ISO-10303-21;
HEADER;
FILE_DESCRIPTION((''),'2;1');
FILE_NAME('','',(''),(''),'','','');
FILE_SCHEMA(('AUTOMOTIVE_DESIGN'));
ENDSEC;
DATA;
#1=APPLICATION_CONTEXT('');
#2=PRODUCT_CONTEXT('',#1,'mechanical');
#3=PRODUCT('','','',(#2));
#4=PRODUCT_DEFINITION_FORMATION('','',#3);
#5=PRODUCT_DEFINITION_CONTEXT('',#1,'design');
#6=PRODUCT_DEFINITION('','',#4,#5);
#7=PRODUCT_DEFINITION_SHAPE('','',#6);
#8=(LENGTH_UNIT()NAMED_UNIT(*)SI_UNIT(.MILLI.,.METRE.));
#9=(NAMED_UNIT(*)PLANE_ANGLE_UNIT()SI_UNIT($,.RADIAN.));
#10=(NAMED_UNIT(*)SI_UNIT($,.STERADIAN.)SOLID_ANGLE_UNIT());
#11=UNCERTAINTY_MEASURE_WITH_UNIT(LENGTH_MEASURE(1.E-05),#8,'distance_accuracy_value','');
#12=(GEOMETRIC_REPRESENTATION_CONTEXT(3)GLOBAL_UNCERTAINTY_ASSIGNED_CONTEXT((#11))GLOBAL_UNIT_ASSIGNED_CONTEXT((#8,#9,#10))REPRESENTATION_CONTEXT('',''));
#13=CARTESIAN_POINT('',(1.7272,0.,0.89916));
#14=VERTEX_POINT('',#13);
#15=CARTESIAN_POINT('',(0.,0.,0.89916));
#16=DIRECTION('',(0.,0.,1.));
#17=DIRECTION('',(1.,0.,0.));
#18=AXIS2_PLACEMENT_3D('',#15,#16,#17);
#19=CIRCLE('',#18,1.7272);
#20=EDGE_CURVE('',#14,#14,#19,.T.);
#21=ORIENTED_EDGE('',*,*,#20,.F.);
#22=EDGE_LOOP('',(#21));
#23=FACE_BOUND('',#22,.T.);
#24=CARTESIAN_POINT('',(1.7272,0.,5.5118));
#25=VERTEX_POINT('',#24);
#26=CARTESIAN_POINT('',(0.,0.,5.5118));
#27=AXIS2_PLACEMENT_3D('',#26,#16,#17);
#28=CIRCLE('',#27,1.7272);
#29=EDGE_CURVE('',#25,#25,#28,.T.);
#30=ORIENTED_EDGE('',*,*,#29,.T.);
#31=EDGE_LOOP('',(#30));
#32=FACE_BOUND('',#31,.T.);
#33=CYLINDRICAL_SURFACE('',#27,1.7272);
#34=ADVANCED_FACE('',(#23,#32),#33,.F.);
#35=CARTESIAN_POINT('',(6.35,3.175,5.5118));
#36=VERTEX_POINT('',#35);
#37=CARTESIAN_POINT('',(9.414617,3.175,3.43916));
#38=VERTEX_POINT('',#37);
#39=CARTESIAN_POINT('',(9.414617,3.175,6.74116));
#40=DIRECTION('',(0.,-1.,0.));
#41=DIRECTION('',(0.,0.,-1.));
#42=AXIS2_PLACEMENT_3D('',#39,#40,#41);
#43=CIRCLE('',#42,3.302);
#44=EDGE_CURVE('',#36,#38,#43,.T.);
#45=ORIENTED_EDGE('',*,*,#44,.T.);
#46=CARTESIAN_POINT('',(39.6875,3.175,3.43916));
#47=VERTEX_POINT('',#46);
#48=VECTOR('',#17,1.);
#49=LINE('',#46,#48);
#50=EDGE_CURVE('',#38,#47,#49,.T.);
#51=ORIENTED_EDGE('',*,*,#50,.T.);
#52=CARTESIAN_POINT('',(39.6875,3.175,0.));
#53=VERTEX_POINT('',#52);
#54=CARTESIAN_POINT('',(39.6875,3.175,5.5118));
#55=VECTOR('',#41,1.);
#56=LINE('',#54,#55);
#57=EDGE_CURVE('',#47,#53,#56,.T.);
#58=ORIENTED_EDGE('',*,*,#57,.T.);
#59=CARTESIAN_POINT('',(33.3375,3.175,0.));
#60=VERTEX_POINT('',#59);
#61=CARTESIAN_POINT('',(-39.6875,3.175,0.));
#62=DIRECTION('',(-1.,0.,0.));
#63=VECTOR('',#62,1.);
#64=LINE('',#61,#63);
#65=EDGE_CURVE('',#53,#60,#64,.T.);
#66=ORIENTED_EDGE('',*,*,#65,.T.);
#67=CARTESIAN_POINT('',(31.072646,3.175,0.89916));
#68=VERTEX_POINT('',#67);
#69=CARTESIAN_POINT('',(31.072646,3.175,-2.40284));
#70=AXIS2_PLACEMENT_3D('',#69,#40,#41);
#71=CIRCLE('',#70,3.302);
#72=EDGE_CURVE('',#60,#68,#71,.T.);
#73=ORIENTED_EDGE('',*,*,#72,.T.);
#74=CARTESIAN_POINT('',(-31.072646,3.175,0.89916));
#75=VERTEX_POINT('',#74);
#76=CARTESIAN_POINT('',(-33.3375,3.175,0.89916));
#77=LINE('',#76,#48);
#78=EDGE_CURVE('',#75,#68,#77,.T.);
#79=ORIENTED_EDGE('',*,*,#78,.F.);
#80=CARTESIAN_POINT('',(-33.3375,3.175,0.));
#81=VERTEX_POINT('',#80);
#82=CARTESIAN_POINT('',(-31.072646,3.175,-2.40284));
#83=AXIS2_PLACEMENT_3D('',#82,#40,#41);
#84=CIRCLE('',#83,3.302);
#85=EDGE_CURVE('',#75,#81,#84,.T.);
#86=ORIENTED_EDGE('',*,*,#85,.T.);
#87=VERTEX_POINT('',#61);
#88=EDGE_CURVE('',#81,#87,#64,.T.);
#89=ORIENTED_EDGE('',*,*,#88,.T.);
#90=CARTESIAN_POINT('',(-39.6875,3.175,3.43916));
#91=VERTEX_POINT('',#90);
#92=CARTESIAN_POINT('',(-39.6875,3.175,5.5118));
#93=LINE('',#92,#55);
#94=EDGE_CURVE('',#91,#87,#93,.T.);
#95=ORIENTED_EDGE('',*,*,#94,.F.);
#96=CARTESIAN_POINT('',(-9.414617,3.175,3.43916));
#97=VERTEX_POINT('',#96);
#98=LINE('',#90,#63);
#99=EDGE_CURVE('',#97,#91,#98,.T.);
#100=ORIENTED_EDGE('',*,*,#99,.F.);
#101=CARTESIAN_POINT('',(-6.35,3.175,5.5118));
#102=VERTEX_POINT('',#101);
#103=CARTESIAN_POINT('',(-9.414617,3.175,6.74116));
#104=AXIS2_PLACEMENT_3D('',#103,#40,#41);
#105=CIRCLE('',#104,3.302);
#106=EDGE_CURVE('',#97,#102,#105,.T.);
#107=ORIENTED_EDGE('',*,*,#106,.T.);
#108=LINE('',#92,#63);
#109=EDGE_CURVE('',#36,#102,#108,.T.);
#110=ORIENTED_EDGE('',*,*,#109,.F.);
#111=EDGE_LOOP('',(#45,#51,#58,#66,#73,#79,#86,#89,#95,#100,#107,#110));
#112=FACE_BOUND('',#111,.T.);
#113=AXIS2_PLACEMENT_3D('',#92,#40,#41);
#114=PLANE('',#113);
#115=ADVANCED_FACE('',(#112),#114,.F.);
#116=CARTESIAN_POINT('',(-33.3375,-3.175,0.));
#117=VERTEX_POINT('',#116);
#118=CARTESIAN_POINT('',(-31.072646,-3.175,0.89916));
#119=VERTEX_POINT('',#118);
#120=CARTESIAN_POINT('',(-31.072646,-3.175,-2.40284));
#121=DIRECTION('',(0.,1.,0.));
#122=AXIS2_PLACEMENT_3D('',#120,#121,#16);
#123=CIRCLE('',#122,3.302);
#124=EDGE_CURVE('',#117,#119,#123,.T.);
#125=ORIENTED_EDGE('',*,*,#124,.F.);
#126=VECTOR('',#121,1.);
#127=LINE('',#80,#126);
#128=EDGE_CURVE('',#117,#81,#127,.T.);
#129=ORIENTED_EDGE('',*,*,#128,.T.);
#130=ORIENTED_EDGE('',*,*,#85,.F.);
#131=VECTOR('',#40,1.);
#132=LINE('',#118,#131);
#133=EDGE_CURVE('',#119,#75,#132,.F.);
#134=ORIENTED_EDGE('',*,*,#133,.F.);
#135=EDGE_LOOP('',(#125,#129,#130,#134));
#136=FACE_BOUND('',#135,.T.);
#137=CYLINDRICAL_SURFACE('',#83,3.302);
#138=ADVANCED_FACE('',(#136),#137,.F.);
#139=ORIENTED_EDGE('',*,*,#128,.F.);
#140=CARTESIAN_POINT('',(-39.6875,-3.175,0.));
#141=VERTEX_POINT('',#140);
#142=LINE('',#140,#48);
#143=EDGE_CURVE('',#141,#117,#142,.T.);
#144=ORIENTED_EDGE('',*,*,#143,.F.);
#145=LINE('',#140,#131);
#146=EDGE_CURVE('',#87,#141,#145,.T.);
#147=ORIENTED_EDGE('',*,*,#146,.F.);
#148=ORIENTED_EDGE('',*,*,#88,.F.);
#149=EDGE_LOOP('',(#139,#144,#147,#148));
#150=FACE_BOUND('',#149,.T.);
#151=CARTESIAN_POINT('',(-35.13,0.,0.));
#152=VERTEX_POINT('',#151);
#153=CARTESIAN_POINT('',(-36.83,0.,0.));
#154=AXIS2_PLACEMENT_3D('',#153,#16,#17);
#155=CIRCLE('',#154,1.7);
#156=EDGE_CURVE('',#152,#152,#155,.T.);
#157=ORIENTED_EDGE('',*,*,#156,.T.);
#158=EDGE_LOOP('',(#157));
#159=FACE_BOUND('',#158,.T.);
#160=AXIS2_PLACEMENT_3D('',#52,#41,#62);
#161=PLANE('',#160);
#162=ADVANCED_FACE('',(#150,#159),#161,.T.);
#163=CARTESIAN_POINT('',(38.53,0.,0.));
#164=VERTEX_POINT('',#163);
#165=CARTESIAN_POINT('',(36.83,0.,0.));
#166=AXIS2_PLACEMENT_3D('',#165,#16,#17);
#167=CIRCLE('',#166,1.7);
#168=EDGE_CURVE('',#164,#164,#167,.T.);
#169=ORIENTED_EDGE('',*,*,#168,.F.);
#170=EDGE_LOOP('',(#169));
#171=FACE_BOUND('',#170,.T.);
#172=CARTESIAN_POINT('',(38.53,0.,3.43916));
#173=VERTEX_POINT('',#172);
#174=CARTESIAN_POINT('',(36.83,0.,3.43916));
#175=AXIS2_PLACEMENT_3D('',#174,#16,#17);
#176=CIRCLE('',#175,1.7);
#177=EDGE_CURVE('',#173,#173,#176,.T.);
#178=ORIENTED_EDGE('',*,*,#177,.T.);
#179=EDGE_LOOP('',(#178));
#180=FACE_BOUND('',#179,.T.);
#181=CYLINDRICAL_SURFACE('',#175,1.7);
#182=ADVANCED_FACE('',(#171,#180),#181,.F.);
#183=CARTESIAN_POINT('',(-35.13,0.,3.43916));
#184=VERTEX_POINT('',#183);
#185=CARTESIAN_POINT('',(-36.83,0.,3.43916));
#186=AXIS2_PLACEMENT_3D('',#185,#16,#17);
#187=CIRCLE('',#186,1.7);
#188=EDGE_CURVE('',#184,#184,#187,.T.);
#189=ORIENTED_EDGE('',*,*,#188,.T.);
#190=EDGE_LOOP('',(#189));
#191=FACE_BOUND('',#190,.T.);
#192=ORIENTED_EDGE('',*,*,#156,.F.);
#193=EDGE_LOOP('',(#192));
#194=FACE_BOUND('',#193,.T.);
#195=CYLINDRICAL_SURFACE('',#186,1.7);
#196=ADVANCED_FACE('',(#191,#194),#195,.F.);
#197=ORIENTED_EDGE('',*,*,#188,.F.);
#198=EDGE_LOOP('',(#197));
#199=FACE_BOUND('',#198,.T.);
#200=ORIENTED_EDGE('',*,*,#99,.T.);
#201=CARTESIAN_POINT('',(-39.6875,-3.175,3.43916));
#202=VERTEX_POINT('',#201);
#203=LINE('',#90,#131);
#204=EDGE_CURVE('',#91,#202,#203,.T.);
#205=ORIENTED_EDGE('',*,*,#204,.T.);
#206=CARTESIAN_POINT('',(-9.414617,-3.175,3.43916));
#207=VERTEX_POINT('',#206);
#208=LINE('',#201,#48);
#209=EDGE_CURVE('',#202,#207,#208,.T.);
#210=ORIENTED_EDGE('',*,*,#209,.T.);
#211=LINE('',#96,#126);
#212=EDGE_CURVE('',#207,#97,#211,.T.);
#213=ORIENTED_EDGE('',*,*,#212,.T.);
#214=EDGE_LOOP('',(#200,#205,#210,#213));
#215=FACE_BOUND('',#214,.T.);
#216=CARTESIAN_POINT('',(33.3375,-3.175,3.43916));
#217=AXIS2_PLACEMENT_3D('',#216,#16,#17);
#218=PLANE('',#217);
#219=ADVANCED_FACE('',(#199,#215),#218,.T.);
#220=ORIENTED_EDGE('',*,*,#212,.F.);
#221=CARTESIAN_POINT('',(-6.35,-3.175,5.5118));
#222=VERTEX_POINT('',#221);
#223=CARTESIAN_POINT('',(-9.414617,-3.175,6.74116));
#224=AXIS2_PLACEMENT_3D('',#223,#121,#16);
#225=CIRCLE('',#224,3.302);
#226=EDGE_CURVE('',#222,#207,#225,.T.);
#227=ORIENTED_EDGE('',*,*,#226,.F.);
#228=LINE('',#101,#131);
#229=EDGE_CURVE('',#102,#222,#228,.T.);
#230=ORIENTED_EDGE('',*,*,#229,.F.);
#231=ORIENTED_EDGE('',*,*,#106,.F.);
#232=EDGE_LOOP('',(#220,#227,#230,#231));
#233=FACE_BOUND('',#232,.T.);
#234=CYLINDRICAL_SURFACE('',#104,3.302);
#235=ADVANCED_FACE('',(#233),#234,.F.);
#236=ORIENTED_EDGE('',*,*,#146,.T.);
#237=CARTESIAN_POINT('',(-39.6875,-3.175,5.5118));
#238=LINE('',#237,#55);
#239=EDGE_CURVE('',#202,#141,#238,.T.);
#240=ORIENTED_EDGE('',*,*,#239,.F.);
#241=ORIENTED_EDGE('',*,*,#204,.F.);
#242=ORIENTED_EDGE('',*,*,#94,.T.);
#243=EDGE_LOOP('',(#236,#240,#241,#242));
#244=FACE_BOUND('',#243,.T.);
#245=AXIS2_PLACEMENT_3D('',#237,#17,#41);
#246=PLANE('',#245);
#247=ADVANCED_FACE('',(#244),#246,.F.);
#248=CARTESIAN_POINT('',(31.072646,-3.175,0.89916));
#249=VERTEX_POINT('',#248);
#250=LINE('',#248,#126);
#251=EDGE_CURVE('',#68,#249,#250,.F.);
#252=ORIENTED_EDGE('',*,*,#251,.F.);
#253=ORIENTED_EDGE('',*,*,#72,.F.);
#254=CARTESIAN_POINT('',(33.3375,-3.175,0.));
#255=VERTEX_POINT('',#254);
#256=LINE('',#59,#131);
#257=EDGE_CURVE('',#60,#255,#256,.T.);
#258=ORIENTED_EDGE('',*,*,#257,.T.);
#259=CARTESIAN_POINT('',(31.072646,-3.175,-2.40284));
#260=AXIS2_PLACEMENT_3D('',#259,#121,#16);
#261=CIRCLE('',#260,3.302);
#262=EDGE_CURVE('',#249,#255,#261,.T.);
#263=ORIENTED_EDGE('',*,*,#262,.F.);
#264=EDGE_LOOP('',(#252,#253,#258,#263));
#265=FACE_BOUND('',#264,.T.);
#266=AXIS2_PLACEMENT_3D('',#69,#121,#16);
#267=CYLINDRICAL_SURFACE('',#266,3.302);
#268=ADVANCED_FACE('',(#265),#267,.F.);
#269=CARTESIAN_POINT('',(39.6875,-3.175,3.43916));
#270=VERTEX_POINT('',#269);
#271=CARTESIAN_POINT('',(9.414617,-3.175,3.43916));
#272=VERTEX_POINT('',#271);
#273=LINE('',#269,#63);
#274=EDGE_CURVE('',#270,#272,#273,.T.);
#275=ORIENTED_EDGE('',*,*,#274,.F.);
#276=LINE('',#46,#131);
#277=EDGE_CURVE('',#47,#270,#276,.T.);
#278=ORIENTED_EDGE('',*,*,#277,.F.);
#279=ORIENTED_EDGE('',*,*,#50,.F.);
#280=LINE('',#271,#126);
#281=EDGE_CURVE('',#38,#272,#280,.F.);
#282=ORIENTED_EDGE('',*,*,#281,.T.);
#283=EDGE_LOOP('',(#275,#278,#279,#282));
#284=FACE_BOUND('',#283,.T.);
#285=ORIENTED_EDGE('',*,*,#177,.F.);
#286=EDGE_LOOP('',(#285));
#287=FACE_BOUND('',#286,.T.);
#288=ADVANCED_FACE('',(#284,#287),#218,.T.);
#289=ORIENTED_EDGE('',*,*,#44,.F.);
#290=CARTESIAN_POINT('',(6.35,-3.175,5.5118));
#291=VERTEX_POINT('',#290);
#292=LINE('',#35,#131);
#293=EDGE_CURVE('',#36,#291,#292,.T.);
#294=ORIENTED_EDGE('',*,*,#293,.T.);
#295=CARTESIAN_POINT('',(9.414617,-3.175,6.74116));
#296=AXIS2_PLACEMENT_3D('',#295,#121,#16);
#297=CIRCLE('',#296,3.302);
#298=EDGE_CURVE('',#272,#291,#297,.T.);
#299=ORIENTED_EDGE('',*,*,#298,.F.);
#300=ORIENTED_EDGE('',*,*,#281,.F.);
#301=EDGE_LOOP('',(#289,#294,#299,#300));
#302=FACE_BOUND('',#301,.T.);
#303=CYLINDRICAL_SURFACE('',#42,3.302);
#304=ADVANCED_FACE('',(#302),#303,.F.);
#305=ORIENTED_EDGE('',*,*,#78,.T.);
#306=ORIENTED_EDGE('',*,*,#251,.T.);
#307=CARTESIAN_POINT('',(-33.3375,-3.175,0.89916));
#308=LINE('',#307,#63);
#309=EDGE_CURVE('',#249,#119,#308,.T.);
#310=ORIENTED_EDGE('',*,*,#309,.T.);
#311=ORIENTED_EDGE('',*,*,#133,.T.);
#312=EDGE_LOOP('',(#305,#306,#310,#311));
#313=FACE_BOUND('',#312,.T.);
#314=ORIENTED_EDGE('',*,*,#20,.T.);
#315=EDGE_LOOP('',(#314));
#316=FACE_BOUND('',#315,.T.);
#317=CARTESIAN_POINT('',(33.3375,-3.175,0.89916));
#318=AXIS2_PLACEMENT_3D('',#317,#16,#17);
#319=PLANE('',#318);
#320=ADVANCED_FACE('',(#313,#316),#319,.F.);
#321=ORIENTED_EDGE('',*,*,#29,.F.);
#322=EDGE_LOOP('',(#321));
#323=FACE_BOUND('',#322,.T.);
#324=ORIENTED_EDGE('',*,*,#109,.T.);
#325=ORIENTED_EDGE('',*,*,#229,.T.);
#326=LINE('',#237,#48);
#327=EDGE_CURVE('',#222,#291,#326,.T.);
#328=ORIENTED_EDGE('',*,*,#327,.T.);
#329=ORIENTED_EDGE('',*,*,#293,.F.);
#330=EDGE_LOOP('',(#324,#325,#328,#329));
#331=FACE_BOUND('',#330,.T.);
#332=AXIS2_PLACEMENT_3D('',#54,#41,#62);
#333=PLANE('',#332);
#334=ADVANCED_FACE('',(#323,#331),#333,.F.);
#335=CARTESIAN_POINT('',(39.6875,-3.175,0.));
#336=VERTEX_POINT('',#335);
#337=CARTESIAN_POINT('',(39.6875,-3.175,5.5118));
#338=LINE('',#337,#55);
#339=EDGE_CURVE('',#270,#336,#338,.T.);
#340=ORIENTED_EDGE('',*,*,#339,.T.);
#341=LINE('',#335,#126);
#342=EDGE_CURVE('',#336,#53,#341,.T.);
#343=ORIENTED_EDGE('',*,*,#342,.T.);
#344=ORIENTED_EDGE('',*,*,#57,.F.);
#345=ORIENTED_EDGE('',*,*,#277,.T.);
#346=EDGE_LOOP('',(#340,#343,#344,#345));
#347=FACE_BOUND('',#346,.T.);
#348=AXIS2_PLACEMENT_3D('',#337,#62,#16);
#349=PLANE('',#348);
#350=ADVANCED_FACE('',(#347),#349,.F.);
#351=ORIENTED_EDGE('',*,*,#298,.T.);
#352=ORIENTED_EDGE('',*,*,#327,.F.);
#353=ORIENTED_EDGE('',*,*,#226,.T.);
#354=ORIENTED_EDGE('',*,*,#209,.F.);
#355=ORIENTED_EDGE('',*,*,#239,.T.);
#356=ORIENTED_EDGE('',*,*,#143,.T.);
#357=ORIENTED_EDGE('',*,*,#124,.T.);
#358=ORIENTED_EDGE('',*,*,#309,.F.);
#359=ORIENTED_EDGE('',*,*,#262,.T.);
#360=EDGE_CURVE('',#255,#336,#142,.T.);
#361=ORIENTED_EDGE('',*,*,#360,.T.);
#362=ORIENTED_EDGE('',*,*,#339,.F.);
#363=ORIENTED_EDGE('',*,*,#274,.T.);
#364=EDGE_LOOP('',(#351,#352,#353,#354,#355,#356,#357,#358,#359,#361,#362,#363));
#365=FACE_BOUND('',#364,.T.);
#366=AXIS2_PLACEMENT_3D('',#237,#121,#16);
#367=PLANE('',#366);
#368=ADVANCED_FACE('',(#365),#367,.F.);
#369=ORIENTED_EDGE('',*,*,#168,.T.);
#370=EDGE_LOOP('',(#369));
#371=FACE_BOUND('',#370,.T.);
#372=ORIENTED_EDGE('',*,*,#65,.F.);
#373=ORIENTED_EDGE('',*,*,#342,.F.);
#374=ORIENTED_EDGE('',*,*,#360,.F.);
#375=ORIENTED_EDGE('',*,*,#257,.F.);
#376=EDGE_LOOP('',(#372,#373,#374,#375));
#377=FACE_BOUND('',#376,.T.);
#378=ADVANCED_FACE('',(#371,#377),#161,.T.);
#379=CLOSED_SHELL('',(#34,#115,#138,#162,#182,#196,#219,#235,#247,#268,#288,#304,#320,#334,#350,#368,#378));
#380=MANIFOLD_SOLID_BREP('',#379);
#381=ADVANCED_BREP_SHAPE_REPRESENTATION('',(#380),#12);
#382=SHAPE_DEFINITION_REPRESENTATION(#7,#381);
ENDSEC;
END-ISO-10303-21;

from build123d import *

# Parameters (mm, degrees)
SKETCH1_W             = 79.375
SKETCH1_H             = 6.35
BOSS_EXTRUDE1_DEPTH   = 5.5118
SKETCH10_W            = 66.675
SKETCH10_H            = 6.35
CUT_EXTRUDE2_DEPTH    = 0.89916
SKETCH2_W             = 33.3375
SKETCH2_H             = 6.35
CUT_EXTRUDE1_DEPTH    = 2.07264
M3_CLEARANCE_HOLE1_D  = 3.4
F_8_32_TAPPED_HOLE1_D = 3.4544
FILLET1_R             = 3.302


with BuildPart() as part:
    # Sketch1 → Boss-Extrude1 (new body)
    with BuildSketch(Plane.XY):
        Rectangle(SKETCH1_W, SKETCH1_H)
    extrude(amount=BOSS_EXTRUDE1_DEPTH)

    # Sketch10 → Cut-Extrude2 (cut)
    with BuildSketch(Plane(origin=(0, 0, 0), x_dir=(-1, 0, 0), z_dir=(0, 0, -1))):
        Rectangle(SKETCH10_W, SKETCH10_H)
    extrude(amount=-CUT_EXTRUDE2_DEPTH, mode=Mode.SUBTRACT)

    # Sketch2 → Cut-Extrude1 (cut)
    with BuildSketch(Plane.XY.offset(5.5118)):
        with Locations((23.01875, 0)):
            Rectangle(SKETCH2_W, SKETCH2_H)
    cut_extrude1 = extrude(amount=-CUT_EXTRUDE1_DEPTH, mode=Mode.SUBTRACT)

    # M3 Clearance Hole1 (through all)
    with Locations(Plane.XY.offset(3.43916)):
        with Locations((36.83, 0)):
            m3_clearance_hole1 = Hole(M3_CLEARANCE_HOLE1_D / 2)

    # Mirror2: Cut-Extrude1, M3 Clearance Hole1 across plane
    add(cut_extrude1.mirror(Plane(origin=(0, 0, 0), x_dir=(0, 0, 1), z_dir=(1, 0, 0))), mode=Mode.SUBTRACT)
    add(m3_clearance_hole1.mirror(Plane(origin=(0, 0, 0), x_dir=(0, 0, 1), z_dir=(1, 0, 0))), mode=Mode.SUBTRACT)

    # #8-32 Tapped Hole1 (through all)
    with Locations(Plane.XY.offset(5.5118)):
        with Locations((0, 0)):
            Hole(F_8_32_TAPPED_HOLE1_D / 2)

    # Fillet1
    # the kernel refuses this fillet: 3.302 mm, written as the material it adds along each edge
    with BuildSketch(Plane(origin=(33.3375, 3.175, 0.89916), x_dir=(-1, 0, 0), z_dir=(0, -1, 0))) as fillet1_piece_1:
        with BuildLine():
            CenterArc((2.264854065, 3.302), FILLET1_R, 226.693279333, 43.306720667)
            Line((0, 0.89916), (-0.045297081, 0.8511032))
            ThreePointArc((-0.045297081, 0.8511032), (-0.06604, 0.44958), (-0.06604, 0))
            Line((-0.06604, 0), (0, -0.06604))
            Line((0, -0.06604), (2.264854065, -0.06604))
            Line((2.264854065, -0.06604), (2.264854065, 0))
        make_face()
    extrude(amount=6.35)
    with BuildSketch(Plane(origin=(6.35, 3.175, 3.43916), x_dir=(1, 0, 0), z_dir=(0, -1, 0))) as fillet1_piece_2:
        with BuildLine():
            CenterArc((3.064617103, 3.302), FILLET1_R, 201.858009222, 68.141990778)
            Line((0, 2.07264), (-0.061292342, 2.0480528))
            ThreePointArc((-0.061292342, 2.0480528), (-0.06604, 1.03632), (-0.06604, 0))
            Line((-0.06604, 0), (0, -0.06604))
            Line((0, -0.06604), (3.064617103, -0.06604))
            Line((3.064617103, -0.06604), (3.064617103, 0))
        make_face()
    extrude(amount=6.35)
    with BuildSketch(Plane(origin=(-6.35, 3.175, 3.43916), x_dir=(0, 0, 1), z_dir=(0, -1, 0))) as fillet1_piece_3:
        with BuildLine():
            CenterArc((3.302, 3.064617103), FILLET1_R, 180, 68.141990778)
            Line((0, 3.064617103), (-0.06604, 3.064617103))
            Line((-0.06604, 3.064617103), (-0.06604, 0))
            Line((-0.06604, 0), (0, -0.06604))
            ThreePointArc((0, -0.06604), (1.03632, -0.06604), (2.0480528, -0.061292342))
            Line((2.0480528, -0.061292342), (2.07264, 0))
        make_face()
    extrude(amount=6.35)
    with BuildSketch(Plane(origin=(-33.3375, -3.175, 0.89916), x_dir=(0, 0, -1), z_dir=(0, 1, 0))) as fillet1_piece_4:
        with BuildLine():
            CenterArc((3.302, -2.264854065), FILLET1_R, 136.693279333, 43.306720667)
            Line((0, -2.264854065), (-0.06604, -2.264854065))
            Line((-0.06604, -2.264854065), (-0.06604, 0))
            Line((-0.06604, 0), (0, 0.06604))
            ThreePointArc((0, 0.06604), (0.44958, 0.06604), (0.8511032, 0.045297081))
            Line((0.8511032, 0.045297081), (0.89916, 0))
        make_face()
    extrude(amount=6.35)


solid = part.part
